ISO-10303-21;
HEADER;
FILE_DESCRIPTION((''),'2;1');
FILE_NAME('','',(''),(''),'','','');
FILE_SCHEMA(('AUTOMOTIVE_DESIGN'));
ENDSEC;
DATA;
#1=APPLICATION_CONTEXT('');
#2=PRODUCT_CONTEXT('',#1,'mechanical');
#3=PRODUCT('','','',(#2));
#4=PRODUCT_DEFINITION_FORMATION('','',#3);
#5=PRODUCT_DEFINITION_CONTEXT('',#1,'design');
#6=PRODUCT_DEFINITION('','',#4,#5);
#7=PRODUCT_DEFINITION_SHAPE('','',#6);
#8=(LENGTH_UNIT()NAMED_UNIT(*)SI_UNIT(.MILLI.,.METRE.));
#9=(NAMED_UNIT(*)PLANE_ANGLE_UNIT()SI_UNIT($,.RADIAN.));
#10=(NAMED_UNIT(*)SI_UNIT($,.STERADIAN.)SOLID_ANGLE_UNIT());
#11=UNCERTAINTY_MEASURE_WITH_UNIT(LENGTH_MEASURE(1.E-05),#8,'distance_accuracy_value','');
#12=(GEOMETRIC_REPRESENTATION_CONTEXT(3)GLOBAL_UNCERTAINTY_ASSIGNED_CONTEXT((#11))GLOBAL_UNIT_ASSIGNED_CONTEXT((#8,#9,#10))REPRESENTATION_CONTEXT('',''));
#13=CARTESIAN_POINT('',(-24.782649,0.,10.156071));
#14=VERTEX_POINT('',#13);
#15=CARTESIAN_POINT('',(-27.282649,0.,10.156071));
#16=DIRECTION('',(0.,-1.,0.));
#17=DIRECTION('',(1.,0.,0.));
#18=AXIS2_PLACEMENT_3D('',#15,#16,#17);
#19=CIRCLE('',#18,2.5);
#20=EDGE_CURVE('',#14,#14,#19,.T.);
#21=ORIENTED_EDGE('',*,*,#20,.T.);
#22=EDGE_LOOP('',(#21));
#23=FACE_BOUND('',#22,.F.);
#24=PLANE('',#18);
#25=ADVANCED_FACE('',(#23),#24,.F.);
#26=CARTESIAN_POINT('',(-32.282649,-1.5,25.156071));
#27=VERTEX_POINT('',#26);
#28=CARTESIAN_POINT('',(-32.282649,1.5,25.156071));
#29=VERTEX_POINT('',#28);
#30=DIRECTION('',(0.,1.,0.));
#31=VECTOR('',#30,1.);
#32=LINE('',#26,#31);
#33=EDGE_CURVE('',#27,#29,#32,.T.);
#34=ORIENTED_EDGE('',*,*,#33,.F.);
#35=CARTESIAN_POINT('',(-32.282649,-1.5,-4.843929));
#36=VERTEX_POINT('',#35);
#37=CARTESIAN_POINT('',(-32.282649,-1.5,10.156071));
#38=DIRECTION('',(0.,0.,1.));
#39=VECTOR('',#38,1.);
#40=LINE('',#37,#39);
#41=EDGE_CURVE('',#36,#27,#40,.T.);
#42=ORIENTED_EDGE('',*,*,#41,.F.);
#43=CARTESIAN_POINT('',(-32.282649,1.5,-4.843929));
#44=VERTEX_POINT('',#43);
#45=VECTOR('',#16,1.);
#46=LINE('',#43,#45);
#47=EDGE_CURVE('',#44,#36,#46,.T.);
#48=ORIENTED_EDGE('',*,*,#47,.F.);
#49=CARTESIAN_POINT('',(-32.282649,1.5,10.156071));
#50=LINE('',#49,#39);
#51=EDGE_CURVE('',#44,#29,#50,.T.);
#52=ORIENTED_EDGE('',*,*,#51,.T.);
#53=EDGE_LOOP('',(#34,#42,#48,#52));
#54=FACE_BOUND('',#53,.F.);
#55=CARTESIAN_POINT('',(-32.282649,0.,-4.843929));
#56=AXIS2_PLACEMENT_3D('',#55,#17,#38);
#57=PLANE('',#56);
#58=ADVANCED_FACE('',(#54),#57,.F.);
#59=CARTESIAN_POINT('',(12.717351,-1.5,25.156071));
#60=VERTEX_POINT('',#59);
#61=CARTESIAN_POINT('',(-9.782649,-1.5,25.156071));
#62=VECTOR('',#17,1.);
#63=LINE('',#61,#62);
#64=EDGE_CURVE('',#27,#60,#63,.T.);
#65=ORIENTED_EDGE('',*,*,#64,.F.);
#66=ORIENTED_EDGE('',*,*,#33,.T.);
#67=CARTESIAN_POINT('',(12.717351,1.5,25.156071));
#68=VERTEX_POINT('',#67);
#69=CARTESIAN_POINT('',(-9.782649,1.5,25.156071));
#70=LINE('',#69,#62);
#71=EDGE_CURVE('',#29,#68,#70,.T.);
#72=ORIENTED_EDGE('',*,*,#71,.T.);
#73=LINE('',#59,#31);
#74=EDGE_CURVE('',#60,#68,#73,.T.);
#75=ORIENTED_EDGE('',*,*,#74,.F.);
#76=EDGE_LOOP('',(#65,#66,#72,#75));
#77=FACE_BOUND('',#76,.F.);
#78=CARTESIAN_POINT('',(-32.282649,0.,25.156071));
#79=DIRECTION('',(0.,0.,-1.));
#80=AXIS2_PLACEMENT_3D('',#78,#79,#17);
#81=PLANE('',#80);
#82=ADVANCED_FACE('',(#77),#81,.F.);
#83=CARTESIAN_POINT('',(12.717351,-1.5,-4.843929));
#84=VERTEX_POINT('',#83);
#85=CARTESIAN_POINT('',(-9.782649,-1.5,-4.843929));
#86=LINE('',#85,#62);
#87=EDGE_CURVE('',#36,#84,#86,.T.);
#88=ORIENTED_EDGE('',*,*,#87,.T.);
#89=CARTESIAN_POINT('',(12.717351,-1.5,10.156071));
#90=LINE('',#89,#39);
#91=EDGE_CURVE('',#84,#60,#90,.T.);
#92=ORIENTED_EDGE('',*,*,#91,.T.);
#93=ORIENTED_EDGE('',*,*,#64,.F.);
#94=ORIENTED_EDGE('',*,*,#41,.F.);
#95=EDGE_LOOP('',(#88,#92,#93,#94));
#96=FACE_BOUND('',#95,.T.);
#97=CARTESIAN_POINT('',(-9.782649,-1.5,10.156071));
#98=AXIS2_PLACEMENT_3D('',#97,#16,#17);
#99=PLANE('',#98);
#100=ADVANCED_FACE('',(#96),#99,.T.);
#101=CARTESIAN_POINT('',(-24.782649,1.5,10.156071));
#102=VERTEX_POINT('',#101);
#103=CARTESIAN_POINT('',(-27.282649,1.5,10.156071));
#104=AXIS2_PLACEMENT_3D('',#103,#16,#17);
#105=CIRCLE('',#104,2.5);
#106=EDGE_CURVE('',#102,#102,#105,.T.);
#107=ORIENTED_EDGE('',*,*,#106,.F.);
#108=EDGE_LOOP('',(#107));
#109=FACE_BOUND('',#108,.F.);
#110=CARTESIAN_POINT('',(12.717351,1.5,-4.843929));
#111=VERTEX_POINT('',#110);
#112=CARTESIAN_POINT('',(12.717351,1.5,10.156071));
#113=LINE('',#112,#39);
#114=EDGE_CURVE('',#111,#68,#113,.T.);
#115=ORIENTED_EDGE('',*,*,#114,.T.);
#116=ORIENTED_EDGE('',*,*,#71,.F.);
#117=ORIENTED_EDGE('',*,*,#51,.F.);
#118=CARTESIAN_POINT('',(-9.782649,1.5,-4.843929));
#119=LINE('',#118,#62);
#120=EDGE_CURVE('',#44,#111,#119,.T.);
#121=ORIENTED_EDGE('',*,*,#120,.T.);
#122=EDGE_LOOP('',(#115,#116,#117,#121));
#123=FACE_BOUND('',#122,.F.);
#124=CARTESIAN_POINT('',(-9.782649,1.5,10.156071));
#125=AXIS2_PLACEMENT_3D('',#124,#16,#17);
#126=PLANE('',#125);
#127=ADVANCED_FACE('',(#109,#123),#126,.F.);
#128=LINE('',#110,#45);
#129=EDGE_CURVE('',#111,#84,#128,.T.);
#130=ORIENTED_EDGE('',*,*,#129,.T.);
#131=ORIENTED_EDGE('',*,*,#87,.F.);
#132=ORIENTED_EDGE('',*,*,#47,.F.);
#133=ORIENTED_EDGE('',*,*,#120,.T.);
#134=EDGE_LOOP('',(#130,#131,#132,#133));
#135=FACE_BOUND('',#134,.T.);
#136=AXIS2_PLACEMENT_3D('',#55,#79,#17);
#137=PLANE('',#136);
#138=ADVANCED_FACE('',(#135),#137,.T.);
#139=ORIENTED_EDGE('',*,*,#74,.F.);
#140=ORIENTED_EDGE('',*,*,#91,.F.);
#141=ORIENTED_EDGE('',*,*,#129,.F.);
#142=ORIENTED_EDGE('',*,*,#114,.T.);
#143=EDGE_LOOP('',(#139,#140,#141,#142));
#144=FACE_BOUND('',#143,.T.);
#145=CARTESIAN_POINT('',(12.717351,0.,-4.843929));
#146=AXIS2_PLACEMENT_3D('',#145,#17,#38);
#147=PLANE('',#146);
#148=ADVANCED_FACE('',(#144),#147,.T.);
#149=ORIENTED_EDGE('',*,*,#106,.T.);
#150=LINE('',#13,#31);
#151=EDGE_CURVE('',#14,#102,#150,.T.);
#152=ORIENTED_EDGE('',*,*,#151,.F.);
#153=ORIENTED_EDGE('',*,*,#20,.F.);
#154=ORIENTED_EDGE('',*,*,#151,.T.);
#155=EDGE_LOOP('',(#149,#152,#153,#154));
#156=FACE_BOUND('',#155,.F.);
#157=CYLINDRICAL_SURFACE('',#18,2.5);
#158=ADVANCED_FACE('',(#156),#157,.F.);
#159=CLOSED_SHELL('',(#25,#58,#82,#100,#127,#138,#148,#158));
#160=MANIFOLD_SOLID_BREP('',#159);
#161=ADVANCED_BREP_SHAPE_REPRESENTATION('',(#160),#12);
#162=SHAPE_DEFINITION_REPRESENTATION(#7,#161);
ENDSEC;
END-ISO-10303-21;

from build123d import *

# Parameters (mm, degrees)
F0_W     = 45
F0_H     = 30
F1_DEPTH = 1.5
F2_D     = 5
F2_DEPTH = 1.501


with BuildPart() as f1:
    # F0 (on Front) → F1 (new body, symmetric)
    with BuildSketch(Plane.XZ):
        with Locations((-9.7826488498, 10.1560708135)):
            Rectangle(F0_W, F0_H)
    extrude(amount=F1_DEPTH, both=True)

    # F2 (through all, one way)
    with BuildSketch(Plane.XZ):
        with Locations((-27.2826488498, 10.1560708135)):
            Circle(F2_D / 2)
    extrude(amount=-F2_DEPTH, mode=Mode.SUBTRACT)


solid = f1.part
